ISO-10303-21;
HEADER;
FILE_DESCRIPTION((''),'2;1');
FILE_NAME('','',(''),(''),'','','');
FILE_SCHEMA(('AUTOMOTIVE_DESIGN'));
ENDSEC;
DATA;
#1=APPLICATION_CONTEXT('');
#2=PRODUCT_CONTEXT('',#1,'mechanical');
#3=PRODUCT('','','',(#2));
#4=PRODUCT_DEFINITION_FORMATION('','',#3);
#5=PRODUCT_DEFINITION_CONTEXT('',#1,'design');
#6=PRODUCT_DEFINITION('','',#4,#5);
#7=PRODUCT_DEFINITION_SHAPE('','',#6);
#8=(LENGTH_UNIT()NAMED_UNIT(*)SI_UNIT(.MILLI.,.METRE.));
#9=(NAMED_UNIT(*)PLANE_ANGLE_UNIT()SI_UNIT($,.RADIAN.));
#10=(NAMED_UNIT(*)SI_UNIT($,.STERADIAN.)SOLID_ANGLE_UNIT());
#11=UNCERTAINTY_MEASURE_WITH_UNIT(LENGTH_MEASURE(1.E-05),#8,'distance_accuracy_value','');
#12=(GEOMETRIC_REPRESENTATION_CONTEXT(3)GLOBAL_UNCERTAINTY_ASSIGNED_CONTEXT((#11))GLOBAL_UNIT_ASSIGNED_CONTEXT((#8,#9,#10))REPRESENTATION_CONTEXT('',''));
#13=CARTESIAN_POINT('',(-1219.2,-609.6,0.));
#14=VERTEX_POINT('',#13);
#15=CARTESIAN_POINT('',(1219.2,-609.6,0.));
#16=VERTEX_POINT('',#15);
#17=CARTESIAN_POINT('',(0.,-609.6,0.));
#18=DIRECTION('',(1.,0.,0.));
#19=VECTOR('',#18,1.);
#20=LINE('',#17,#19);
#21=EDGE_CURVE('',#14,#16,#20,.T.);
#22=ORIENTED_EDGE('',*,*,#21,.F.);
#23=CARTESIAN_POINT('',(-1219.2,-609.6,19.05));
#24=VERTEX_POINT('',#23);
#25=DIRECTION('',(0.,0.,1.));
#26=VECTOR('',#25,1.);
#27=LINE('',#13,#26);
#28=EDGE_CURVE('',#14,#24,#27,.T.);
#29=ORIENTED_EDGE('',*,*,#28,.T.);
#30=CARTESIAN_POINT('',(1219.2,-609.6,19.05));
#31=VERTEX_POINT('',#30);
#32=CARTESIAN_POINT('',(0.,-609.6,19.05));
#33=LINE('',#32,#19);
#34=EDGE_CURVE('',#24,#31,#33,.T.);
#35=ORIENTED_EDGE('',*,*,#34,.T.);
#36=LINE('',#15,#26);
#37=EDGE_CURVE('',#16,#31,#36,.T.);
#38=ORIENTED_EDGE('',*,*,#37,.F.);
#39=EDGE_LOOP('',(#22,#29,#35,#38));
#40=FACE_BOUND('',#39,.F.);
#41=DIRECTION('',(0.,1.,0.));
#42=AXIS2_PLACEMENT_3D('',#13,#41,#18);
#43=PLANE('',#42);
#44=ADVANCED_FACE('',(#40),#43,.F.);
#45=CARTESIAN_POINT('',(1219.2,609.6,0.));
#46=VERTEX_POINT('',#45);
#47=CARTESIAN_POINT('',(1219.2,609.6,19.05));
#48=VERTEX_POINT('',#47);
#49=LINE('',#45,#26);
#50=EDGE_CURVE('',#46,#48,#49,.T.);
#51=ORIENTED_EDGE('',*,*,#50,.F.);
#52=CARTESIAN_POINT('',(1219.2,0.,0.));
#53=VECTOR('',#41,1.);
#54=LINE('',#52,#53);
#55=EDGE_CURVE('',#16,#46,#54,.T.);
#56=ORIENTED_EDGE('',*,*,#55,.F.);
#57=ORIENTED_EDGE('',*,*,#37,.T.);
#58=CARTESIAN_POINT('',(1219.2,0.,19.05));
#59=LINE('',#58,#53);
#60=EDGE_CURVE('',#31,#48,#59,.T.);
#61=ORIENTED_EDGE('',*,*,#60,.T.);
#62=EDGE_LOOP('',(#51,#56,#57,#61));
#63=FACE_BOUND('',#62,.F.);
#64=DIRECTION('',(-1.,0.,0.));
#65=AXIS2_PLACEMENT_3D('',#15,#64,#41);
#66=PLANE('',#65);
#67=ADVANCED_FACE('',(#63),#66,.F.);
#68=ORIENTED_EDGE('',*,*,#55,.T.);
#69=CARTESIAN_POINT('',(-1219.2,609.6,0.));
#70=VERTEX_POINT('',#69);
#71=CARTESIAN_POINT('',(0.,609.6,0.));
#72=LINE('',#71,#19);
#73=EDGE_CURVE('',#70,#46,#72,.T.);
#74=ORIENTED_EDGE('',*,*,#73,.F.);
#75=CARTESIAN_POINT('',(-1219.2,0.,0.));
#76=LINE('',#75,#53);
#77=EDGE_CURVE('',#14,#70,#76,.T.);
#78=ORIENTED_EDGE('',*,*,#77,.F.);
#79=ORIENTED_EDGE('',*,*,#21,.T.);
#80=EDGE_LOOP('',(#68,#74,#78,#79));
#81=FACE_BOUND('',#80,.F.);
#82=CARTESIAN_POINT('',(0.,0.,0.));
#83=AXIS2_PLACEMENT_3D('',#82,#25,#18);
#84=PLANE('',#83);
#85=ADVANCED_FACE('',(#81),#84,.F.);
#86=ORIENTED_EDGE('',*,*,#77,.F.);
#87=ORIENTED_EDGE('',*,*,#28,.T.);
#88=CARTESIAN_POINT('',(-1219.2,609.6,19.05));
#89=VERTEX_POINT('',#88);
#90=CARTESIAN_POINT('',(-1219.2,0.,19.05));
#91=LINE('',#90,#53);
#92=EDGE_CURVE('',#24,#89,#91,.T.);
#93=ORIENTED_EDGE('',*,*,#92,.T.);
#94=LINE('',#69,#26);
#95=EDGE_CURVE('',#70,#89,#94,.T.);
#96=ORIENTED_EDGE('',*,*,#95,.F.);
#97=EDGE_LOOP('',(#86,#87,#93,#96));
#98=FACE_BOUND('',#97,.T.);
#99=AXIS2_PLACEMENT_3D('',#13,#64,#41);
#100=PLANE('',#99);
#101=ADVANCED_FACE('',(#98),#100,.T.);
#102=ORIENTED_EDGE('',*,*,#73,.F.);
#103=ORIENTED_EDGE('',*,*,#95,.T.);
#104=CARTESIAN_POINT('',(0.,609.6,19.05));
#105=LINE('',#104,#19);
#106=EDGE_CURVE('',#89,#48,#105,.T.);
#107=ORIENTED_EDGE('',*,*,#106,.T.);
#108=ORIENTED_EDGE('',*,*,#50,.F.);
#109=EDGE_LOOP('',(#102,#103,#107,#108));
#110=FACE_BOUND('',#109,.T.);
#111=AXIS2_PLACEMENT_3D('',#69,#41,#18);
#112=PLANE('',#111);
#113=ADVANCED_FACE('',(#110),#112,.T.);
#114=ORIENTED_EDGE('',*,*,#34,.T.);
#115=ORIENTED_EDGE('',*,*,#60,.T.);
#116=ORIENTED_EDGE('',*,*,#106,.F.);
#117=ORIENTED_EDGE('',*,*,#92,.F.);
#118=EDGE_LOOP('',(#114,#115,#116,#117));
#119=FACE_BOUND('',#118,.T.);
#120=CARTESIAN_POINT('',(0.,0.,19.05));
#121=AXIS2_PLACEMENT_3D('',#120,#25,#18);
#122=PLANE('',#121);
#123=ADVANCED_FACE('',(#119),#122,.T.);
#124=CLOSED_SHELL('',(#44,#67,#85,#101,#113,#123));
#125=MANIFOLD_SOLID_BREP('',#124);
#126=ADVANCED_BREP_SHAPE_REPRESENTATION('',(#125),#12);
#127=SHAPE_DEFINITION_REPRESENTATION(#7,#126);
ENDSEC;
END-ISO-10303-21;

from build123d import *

# Parameters (mm, degrees)
F1_W     = 2438.4
F1_H     = 1219.2
F2_DEPTH = 19.05


# Not quite as in the source:
# - a variable given as a bare number and used for a length is read in inches; the dataset says mm whatever the document's units were


with BuildPart() as f2:
    # F1 (on Top) → F2 (new body)
    with BuildSketch(Plane.XY):
        Rectangle(F1_W, F1_H)
    extrude(amount=F2_DEPTH)


solid = f2.part
